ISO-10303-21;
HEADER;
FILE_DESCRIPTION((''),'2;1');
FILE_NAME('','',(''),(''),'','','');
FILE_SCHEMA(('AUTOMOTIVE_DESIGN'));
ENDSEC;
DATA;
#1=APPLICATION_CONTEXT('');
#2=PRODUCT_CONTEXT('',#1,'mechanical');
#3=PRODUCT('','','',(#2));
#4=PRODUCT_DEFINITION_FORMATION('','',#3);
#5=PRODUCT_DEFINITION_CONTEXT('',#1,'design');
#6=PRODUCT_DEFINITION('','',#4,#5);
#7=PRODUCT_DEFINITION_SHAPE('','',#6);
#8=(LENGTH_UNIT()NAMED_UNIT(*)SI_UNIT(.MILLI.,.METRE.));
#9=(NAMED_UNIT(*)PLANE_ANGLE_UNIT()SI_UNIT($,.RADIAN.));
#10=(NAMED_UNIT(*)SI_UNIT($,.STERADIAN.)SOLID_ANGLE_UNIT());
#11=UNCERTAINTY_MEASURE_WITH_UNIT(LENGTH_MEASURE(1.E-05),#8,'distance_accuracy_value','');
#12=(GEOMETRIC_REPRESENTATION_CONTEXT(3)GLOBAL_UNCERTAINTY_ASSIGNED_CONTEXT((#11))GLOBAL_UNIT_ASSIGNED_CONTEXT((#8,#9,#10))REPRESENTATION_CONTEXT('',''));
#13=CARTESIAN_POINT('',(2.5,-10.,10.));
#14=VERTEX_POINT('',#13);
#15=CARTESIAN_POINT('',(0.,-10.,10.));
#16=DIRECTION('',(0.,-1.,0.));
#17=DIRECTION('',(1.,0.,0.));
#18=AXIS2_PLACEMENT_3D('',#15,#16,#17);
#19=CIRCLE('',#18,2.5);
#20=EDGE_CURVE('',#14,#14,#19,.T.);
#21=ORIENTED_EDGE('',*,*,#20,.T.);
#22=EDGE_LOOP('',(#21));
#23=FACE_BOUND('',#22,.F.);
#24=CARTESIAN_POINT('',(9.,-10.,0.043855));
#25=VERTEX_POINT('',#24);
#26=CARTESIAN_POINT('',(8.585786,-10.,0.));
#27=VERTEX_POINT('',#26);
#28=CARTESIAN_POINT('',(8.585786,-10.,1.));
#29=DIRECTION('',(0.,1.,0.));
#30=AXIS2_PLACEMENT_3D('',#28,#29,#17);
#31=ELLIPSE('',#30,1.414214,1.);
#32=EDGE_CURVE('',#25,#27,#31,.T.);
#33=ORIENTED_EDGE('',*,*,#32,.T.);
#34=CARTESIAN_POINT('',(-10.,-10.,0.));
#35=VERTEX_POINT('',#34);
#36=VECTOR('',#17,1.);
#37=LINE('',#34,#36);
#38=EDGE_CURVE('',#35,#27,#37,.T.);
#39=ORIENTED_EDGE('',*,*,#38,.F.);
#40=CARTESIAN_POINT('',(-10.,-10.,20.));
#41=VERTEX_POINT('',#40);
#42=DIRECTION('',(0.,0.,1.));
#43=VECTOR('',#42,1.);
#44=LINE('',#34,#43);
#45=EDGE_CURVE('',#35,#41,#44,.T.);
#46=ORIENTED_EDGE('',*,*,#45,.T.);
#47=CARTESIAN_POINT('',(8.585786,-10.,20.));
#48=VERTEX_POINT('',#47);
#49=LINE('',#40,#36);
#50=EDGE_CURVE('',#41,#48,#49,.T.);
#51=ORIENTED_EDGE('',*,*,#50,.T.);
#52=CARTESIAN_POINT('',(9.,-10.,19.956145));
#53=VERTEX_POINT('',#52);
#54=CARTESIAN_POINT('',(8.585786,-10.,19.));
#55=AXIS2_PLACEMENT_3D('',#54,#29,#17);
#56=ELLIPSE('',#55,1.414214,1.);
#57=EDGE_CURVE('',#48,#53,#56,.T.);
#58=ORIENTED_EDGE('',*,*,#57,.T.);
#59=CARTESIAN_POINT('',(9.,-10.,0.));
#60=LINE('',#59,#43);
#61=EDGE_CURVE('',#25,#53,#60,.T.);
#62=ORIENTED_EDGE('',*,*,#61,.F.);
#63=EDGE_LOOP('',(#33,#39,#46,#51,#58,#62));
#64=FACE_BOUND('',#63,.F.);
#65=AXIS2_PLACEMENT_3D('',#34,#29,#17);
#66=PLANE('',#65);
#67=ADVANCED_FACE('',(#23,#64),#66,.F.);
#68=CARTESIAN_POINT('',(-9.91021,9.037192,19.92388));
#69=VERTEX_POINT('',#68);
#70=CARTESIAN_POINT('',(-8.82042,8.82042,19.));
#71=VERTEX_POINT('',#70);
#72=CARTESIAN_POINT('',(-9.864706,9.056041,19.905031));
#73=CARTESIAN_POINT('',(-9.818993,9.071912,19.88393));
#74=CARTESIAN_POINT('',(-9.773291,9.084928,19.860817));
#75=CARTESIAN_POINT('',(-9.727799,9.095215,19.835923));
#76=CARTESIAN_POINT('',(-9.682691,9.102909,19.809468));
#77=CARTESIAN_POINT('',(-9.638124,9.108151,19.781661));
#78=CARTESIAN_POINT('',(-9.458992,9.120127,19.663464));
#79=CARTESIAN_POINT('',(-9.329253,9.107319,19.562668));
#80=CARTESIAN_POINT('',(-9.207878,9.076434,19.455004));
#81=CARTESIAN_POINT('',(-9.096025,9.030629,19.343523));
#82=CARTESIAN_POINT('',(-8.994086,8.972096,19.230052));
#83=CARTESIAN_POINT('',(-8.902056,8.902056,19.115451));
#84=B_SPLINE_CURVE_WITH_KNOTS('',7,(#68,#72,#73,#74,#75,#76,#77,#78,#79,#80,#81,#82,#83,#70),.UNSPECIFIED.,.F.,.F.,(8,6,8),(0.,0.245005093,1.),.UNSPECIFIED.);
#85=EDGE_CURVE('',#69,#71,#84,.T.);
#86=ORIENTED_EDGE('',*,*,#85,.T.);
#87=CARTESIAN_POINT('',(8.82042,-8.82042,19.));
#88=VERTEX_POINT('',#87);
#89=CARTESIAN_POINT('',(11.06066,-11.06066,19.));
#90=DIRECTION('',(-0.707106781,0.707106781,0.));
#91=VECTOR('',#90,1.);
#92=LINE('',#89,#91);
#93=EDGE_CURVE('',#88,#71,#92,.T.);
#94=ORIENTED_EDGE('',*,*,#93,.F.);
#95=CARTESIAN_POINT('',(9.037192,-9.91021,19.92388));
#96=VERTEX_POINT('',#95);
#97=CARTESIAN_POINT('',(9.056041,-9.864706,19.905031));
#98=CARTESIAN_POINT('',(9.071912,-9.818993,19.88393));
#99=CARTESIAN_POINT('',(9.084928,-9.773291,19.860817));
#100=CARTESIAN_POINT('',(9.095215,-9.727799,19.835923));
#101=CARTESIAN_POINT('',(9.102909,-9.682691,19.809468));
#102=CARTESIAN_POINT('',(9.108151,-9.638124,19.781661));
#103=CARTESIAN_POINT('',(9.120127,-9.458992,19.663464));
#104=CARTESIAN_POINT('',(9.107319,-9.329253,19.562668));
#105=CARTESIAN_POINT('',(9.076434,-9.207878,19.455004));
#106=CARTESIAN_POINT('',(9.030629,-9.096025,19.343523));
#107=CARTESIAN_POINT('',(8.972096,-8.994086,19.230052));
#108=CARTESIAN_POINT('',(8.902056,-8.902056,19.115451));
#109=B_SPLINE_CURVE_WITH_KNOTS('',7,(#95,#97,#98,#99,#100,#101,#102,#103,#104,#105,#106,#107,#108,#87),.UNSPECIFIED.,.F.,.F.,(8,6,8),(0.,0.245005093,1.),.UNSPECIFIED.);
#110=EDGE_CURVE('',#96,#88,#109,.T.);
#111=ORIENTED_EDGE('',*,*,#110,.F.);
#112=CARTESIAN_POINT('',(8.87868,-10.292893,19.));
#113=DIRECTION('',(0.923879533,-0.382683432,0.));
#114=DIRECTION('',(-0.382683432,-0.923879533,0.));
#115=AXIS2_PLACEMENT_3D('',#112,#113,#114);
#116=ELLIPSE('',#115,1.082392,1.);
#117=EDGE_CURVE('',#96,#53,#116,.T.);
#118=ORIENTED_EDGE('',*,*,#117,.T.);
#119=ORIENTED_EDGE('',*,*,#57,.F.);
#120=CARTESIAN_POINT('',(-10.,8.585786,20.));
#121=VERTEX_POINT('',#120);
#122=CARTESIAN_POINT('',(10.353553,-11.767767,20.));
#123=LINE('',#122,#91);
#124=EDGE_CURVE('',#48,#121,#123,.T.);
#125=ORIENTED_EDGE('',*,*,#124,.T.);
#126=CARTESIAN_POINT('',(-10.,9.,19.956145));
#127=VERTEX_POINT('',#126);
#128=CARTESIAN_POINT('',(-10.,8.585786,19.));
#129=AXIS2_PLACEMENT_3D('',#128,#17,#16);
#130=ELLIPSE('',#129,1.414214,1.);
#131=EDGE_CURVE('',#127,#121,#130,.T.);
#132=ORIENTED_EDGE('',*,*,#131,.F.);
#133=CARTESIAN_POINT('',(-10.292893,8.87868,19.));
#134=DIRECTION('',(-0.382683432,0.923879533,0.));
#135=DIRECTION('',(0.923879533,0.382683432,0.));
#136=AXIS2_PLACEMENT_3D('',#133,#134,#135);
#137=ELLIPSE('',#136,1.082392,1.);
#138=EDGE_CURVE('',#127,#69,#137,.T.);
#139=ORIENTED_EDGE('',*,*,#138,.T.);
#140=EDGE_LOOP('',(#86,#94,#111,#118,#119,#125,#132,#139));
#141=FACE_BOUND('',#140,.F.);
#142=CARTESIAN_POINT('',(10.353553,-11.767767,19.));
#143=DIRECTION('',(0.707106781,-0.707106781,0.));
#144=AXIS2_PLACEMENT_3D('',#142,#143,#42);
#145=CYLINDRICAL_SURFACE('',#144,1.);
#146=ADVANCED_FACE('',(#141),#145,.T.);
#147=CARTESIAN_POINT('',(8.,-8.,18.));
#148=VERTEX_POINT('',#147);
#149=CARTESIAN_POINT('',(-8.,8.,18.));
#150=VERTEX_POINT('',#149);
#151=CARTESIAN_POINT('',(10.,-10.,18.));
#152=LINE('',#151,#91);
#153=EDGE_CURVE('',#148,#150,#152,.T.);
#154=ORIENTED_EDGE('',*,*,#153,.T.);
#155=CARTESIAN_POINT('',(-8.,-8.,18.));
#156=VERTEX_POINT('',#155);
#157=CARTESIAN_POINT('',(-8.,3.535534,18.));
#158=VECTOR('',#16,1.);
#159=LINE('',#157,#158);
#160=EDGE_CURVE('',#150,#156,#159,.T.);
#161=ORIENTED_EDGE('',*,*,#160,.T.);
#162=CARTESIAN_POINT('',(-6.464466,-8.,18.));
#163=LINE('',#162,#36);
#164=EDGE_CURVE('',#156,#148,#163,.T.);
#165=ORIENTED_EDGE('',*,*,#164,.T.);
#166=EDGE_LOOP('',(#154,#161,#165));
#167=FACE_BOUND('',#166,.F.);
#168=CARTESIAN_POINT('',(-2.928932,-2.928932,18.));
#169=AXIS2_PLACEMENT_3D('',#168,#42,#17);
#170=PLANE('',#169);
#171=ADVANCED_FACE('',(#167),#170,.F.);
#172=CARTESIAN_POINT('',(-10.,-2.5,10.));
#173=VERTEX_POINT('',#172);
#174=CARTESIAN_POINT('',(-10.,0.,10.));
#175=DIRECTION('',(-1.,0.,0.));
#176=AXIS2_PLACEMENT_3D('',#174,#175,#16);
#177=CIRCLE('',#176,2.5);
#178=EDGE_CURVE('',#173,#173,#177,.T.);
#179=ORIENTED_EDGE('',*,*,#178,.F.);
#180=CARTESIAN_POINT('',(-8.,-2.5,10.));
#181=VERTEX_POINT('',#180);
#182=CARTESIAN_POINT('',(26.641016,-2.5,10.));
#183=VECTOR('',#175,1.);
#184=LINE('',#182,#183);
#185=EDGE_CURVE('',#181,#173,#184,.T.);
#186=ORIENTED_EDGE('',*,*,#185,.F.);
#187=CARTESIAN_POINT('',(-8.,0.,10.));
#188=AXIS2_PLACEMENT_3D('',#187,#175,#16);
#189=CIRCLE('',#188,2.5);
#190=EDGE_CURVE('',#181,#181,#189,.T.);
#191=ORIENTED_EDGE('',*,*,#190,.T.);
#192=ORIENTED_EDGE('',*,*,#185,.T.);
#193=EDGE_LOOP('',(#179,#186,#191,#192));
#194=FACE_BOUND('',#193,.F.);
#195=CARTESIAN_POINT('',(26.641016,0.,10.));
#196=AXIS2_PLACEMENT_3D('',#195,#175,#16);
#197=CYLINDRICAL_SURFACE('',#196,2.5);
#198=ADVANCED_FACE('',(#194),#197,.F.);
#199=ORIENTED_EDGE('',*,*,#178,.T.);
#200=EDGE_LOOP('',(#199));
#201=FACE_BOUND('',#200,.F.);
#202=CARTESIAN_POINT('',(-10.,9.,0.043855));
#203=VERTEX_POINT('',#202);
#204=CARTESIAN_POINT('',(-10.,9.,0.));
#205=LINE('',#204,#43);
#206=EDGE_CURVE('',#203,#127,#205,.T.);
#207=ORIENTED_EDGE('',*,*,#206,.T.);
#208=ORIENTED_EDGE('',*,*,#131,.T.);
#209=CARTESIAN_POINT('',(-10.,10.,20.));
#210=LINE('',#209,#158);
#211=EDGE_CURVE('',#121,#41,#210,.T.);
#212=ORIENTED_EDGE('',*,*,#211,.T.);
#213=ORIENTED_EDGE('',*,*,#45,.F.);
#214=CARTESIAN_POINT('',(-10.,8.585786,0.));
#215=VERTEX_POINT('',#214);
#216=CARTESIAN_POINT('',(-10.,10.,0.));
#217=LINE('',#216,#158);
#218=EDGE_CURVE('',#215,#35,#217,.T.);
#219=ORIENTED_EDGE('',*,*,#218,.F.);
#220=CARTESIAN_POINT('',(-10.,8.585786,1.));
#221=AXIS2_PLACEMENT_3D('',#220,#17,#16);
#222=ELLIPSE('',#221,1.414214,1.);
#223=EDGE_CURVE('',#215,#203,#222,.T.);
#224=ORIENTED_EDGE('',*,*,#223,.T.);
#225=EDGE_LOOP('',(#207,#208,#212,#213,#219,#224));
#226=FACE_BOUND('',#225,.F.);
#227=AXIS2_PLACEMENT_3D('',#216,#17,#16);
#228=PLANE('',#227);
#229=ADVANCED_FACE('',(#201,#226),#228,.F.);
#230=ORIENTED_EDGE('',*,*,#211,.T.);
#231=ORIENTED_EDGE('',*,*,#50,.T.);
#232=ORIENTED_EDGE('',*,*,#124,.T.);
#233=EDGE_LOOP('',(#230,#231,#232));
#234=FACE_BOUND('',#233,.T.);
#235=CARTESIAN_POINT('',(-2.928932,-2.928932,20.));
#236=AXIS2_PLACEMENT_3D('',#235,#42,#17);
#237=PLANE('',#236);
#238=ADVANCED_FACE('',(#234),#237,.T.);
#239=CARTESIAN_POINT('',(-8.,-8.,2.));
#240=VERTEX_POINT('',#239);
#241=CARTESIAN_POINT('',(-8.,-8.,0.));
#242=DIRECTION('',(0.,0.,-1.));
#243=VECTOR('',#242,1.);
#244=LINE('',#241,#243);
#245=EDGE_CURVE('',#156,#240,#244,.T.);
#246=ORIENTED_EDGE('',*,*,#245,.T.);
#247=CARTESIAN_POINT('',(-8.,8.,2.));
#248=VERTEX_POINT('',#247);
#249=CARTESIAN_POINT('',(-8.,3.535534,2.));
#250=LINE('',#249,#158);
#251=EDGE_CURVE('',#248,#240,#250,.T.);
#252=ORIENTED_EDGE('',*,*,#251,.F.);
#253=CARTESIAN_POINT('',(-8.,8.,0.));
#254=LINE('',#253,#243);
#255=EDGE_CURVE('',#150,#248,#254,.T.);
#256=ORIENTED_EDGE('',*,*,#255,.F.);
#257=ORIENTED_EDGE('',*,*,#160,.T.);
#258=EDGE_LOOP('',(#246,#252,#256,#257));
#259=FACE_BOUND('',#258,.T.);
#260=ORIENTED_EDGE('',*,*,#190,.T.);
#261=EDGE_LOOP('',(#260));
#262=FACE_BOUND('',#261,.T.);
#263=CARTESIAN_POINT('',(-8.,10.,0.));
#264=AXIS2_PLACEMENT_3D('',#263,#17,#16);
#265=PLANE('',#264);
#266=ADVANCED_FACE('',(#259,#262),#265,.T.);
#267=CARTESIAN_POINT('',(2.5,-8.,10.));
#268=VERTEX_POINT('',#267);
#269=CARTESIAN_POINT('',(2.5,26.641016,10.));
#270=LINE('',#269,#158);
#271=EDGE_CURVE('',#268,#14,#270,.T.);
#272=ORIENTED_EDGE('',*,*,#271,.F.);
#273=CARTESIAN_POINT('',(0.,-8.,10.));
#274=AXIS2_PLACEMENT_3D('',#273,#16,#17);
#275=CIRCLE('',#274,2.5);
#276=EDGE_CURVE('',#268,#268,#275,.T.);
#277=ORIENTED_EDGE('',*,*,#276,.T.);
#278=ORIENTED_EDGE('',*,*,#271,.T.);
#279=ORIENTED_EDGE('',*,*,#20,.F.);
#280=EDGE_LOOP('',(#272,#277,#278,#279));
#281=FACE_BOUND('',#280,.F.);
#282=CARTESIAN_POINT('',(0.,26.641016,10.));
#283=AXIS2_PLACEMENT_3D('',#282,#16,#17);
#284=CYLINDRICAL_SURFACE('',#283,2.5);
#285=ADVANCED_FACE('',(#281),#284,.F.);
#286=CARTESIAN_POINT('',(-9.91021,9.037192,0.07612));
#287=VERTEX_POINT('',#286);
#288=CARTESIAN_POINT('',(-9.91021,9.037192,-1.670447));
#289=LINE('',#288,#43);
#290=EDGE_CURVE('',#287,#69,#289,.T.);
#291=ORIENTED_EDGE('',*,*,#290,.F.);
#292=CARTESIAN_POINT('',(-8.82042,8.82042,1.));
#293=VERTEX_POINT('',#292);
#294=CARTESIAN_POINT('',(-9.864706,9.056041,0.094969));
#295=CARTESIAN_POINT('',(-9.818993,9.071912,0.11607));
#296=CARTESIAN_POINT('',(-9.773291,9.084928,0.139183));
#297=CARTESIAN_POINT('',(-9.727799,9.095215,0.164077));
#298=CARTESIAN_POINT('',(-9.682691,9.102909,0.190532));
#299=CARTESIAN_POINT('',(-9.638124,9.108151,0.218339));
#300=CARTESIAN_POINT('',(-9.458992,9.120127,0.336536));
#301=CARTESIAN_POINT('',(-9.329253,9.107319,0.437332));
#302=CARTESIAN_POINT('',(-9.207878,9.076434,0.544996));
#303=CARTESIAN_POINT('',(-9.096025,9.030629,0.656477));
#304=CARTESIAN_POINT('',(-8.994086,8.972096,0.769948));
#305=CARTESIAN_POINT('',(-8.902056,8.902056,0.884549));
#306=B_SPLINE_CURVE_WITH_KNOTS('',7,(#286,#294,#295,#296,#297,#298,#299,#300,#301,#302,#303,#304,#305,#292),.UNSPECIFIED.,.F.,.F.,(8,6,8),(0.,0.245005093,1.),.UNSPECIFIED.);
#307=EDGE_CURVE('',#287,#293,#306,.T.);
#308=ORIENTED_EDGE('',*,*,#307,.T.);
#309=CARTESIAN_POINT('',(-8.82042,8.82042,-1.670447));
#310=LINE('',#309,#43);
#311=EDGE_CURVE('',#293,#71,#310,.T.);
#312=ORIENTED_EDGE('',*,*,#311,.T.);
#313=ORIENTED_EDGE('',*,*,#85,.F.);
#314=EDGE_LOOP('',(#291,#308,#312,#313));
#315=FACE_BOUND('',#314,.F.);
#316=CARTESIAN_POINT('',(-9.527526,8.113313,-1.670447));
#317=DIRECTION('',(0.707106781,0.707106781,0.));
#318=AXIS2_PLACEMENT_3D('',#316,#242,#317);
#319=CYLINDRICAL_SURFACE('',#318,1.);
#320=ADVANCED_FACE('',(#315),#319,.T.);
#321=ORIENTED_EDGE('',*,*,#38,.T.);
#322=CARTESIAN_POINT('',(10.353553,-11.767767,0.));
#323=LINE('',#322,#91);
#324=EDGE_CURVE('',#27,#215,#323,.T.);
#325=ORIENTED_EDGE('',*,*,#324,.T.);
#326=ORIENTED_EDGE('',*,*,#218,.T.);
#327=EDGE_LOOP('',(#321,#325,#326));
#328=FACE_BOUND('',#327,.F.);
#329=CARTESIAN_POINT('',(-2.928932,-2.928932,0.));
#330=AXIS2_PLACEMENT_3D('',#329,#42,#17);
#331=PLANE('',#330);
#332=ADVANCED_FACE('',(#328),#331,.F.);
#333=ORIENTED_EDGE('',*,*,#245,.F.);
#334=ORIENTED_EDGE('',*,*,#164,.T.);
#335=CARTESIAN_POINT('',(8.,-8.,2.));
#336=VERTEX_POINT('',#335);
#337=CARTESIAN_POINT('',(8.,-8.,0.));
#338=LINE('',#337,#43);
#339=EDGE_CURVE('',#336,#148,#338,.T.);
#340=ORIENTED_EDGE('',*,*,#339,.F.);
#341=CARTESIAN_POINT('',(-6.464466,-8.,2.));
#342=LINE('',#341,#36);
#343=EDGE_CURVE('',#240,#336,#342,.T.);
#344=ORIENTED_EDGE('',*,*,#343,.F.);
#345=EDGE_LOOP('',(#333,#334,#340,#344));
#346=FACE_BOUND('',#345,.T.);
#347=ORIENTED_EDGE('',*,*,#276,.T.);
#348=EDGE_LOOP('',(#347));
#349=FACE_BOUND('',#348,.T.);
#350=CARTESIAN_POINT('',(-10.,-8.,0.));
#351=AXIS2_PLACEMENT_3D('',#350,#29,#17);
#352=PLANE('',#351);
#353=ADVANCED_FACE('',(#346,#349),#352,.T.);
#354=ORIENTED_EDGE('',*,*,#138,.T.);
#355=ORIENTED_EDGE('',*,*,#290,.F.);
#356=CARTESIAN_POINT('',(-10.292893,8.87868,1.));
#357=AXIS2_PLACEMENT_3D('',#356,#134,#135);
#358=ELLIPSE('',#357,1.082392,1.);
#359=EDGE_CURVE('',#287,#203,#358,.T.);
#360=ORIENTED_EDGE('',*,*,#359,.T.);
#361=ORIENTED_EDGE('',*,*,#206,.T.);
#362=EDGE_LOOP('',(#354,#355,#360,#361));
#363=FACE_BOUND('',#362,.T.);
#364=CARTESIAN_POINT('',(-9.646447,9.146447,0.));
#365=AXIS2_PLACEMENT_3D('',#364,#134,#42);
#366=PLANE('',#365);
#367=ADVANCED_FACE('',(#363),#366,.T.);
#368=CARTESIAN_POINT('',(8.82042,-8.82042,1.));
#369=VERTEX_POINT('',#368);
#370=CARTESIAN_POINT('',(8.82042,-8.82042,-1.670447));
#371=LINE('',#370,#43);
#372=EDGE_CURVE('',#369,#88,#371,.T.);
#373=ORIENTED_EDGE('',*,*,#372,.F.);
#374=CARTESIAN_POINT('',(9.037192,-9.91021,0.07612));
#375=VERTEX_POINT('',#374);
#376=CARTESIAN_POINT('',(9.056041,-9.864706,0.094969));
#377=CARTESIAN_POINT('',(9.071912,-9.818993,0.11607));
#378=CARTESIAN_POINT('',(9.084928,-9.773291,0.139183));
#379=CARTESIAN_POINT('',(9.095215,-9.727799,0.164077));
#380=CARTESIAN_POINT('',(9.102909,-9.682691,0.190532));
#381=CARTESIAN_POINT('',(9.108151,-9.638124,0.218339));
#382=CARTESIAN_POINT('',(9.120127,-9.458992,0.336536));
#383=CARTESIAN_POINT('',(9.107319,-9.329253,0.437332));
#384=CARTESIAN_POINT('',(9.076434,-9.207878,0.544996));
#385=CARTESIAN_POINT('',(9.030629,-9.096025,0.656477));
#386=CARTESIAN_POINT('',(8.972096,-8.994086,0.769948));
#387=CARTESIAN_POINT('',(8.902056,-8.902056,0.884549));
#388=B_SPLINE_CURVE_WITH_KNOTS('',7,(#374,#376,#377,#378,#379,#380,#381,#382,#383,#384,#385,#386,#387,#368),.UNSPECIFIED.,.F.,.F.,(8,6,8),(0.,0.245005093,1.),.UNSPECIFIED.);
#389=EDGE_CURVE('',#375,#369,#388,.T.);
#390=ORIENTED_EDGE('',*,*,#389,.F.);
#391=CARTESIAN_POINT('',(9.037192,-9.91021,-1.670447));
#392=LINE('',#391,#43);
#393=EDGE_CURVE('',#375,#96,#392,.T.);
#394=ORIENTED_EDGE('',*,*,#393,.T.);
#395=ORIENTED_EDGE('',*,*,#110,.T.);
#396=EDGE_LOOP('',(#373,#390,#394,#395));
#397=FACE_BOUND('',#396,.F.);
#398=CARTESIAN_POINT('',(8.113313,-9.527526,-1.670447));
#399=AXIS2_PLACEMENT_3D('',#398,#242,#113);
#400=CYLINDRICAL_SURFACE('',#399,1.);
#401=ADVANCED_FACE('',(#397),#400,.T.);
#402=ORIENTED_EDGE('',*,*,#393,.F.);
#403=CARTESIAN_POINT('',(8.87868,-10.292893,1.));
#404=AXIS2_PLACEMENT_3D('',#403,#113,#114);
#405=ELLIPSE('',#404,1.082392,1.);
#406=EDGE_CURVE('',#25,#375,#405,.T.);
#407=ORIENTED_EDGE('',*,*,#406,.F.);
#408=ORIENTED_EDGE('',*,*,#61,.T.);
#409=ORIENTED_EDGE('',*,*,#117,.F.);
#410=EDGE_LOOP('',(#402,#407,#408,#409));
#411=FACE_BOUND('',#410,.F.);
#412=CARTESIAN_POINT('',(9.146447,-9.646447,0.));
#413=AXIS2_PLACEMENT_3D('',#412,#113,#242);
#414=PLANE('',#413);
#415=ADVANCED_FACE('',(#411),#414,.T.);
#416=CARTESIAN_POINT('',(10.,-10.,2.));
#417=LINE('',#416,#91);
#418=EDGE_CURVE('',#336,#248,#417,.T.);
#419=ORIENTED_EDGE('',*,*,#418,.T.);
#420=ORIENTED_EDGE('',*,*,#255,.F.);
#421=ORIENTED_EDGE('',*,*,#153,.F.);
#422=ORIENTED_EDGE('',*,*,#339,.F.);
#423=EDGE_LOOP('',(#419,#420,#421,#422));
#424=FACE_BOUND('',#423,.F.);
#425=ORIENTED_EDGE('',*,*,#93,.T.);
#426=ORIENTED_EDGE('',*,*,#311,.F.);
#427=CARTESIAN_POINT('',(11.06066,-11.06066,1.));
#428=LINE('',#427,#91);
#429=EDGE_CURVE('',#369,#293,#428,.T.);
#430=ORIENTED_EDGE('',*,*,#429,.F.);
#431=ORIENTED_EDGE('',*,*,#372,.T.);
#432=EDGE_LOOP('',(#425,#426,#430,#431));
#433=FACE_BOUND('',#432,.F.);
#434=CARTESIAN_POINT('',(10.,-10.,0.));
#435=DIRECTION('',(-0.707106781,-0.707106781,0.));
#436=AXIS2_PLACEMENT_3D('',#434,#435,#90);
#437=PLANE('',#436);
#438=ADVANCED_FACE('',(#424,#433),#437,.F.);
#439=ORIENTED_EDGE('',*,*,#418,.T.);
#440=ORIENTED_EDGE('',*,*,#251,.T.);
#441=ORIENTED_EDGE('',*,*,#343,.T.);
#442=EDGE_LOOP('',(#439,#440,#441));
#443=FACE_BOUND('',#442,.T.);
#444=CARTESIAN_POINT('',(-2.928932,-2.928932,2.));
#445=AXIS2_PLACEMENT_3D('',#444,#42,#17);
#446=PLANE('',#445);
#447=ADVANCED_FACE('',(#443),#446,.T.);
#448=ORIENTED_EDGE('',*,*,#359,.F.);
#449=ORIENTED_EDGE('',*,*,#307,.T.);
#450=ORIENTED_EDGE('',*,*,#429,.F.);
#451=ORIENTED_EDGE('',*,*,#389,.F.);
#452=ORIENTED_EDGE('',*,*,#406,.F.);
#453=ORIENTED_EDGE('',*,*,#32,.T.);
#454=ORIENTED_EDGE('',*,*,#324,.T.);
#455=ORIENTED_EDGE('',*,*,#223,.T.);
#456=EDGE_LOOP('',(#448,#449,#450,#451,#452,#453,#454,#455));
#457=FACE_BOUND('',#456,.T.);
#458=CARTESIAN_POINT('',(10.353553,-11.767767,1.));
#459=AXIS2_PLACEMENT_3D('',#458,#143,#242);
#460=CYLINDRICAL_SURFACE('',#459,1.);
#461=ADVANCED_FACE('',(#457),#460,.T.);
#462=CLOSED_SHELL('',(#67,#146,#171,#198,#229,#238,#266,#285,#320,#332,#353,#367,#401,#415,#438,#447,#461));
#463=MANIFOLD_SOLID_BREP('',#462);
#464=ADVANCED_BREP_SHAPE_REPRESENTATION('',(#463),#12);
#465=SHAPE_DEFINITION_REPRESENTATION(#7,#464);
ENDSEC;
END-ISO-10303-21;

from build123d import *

# Parameters (mm, degrees)
F0_DEPTH    = 20
F1_T        = -2
F4_D        = 5
F4_ON_F2_D  = 5
F5_SIZE     = 1
F7_T1_DEPTH = 31.2842712475
F7_T3_DEPTH = 23.3408931896


# Not quite as in the source:
# - a fillet or chamfer that OpenCascade refuses, or shapes differently, is made with other operations: its cross-section is extruded or revolved along the edge and cut away or added


with BuildPart() as f0:
    # F6 (on Top) → F0 (new body)
    with BuildSketch(Plane.XY):
        Polygon((-10, -10), (10, -10), (-10, 10), align=None)
    extrude(amount=F0_DEPTH)

    # F1
    f1_openings = [f0.faces().sort_by_distance(p)[0] for p in [
        (0, 0, 10),
    ]]
    offset(amount=F1_T, openings=f1_openings)

    # F4 (through all)
    with Locations(Plane(origin=(0, -8, 0), x_dir=(-1, 0, 0), z_dir=(0, 1, 0))):
        with Locations((0, 10)):
            Hole(F4_D / 2)

    # F4 on F2 (through all)
    with Locations(Plane.YZ.offset(-8)):
        with Locations((0, 10)):
            Hole(F4_ON_F2_D / 2)

    # F5
    f5_edges = [f0.edges().sort_by_distance(p)[0] for p in [
        (-10, 10, 10),
        (10, -10, 10),
    ]]
    chamfer(f5_edges, length=F5_SIZE)

    # F7: fillet of radius 1 on 4 edges, made by hand

    # F7_s2 → F7_t1 (cut)
    with BuildSketch(Plane(origin=(11.0606601718, -11.0606601718, 0), x_dir=(0, 0, 1), z_dir=(-0.7071067812, 0.7071067812, 0))):
        with BuildLine():
            ThreePointArc((0, -1), (0.2928932188, -0.2928932188), (1, 0))
            Line((1, 0), (0, 0))
            Line((0, 0), (0, -1))
        make_face()
        with BuildLine():
            ThreePointArc((20, -1), (19.7071067812, -0.2928932188), (19, 0))
            Line((19, 0), (20, 0))
            Line((20, 0), (20, -1))
        make_face()
    extrude(amount=F7_T1_DEPTH, mode=Mode.SUBTRACT)

    # F7_s4 → F7_t3 (cut)
    with BuildSketch(Plane.XY.offset(-1.6704465948)):
        with BuildLine():
            ThreePointArc((9.0371923242, -9.9102097864), (9.0940980721, -9.3324360321), (8.8204195729, -8.8204195729))
            Line((8.8204195729, -8.8204195729), (9.2928932188, -9.2928932188))
            Line((9.2928932188, -9.2928932188), (9.0371923242, -9.9102097864))
        make_face()
        with BuildLine():
            ThreePointArc((-8.8204195729, 8.8204195729), (-9.3324360321, 9.0940980721), (-9.9102097864, 9.0371923242))
            Line((-9.9102097864, 9.0371923242), (-9.2928932188, 9.2928932188))
            Line((-9.2928932188, 9.2928932188), (-8.8204195729, 8.8204195729))
        make_face()
    extrude(amount=F7_T3_DEPTH, mode=Mode.SUBTRACT)


solid = f0.part
